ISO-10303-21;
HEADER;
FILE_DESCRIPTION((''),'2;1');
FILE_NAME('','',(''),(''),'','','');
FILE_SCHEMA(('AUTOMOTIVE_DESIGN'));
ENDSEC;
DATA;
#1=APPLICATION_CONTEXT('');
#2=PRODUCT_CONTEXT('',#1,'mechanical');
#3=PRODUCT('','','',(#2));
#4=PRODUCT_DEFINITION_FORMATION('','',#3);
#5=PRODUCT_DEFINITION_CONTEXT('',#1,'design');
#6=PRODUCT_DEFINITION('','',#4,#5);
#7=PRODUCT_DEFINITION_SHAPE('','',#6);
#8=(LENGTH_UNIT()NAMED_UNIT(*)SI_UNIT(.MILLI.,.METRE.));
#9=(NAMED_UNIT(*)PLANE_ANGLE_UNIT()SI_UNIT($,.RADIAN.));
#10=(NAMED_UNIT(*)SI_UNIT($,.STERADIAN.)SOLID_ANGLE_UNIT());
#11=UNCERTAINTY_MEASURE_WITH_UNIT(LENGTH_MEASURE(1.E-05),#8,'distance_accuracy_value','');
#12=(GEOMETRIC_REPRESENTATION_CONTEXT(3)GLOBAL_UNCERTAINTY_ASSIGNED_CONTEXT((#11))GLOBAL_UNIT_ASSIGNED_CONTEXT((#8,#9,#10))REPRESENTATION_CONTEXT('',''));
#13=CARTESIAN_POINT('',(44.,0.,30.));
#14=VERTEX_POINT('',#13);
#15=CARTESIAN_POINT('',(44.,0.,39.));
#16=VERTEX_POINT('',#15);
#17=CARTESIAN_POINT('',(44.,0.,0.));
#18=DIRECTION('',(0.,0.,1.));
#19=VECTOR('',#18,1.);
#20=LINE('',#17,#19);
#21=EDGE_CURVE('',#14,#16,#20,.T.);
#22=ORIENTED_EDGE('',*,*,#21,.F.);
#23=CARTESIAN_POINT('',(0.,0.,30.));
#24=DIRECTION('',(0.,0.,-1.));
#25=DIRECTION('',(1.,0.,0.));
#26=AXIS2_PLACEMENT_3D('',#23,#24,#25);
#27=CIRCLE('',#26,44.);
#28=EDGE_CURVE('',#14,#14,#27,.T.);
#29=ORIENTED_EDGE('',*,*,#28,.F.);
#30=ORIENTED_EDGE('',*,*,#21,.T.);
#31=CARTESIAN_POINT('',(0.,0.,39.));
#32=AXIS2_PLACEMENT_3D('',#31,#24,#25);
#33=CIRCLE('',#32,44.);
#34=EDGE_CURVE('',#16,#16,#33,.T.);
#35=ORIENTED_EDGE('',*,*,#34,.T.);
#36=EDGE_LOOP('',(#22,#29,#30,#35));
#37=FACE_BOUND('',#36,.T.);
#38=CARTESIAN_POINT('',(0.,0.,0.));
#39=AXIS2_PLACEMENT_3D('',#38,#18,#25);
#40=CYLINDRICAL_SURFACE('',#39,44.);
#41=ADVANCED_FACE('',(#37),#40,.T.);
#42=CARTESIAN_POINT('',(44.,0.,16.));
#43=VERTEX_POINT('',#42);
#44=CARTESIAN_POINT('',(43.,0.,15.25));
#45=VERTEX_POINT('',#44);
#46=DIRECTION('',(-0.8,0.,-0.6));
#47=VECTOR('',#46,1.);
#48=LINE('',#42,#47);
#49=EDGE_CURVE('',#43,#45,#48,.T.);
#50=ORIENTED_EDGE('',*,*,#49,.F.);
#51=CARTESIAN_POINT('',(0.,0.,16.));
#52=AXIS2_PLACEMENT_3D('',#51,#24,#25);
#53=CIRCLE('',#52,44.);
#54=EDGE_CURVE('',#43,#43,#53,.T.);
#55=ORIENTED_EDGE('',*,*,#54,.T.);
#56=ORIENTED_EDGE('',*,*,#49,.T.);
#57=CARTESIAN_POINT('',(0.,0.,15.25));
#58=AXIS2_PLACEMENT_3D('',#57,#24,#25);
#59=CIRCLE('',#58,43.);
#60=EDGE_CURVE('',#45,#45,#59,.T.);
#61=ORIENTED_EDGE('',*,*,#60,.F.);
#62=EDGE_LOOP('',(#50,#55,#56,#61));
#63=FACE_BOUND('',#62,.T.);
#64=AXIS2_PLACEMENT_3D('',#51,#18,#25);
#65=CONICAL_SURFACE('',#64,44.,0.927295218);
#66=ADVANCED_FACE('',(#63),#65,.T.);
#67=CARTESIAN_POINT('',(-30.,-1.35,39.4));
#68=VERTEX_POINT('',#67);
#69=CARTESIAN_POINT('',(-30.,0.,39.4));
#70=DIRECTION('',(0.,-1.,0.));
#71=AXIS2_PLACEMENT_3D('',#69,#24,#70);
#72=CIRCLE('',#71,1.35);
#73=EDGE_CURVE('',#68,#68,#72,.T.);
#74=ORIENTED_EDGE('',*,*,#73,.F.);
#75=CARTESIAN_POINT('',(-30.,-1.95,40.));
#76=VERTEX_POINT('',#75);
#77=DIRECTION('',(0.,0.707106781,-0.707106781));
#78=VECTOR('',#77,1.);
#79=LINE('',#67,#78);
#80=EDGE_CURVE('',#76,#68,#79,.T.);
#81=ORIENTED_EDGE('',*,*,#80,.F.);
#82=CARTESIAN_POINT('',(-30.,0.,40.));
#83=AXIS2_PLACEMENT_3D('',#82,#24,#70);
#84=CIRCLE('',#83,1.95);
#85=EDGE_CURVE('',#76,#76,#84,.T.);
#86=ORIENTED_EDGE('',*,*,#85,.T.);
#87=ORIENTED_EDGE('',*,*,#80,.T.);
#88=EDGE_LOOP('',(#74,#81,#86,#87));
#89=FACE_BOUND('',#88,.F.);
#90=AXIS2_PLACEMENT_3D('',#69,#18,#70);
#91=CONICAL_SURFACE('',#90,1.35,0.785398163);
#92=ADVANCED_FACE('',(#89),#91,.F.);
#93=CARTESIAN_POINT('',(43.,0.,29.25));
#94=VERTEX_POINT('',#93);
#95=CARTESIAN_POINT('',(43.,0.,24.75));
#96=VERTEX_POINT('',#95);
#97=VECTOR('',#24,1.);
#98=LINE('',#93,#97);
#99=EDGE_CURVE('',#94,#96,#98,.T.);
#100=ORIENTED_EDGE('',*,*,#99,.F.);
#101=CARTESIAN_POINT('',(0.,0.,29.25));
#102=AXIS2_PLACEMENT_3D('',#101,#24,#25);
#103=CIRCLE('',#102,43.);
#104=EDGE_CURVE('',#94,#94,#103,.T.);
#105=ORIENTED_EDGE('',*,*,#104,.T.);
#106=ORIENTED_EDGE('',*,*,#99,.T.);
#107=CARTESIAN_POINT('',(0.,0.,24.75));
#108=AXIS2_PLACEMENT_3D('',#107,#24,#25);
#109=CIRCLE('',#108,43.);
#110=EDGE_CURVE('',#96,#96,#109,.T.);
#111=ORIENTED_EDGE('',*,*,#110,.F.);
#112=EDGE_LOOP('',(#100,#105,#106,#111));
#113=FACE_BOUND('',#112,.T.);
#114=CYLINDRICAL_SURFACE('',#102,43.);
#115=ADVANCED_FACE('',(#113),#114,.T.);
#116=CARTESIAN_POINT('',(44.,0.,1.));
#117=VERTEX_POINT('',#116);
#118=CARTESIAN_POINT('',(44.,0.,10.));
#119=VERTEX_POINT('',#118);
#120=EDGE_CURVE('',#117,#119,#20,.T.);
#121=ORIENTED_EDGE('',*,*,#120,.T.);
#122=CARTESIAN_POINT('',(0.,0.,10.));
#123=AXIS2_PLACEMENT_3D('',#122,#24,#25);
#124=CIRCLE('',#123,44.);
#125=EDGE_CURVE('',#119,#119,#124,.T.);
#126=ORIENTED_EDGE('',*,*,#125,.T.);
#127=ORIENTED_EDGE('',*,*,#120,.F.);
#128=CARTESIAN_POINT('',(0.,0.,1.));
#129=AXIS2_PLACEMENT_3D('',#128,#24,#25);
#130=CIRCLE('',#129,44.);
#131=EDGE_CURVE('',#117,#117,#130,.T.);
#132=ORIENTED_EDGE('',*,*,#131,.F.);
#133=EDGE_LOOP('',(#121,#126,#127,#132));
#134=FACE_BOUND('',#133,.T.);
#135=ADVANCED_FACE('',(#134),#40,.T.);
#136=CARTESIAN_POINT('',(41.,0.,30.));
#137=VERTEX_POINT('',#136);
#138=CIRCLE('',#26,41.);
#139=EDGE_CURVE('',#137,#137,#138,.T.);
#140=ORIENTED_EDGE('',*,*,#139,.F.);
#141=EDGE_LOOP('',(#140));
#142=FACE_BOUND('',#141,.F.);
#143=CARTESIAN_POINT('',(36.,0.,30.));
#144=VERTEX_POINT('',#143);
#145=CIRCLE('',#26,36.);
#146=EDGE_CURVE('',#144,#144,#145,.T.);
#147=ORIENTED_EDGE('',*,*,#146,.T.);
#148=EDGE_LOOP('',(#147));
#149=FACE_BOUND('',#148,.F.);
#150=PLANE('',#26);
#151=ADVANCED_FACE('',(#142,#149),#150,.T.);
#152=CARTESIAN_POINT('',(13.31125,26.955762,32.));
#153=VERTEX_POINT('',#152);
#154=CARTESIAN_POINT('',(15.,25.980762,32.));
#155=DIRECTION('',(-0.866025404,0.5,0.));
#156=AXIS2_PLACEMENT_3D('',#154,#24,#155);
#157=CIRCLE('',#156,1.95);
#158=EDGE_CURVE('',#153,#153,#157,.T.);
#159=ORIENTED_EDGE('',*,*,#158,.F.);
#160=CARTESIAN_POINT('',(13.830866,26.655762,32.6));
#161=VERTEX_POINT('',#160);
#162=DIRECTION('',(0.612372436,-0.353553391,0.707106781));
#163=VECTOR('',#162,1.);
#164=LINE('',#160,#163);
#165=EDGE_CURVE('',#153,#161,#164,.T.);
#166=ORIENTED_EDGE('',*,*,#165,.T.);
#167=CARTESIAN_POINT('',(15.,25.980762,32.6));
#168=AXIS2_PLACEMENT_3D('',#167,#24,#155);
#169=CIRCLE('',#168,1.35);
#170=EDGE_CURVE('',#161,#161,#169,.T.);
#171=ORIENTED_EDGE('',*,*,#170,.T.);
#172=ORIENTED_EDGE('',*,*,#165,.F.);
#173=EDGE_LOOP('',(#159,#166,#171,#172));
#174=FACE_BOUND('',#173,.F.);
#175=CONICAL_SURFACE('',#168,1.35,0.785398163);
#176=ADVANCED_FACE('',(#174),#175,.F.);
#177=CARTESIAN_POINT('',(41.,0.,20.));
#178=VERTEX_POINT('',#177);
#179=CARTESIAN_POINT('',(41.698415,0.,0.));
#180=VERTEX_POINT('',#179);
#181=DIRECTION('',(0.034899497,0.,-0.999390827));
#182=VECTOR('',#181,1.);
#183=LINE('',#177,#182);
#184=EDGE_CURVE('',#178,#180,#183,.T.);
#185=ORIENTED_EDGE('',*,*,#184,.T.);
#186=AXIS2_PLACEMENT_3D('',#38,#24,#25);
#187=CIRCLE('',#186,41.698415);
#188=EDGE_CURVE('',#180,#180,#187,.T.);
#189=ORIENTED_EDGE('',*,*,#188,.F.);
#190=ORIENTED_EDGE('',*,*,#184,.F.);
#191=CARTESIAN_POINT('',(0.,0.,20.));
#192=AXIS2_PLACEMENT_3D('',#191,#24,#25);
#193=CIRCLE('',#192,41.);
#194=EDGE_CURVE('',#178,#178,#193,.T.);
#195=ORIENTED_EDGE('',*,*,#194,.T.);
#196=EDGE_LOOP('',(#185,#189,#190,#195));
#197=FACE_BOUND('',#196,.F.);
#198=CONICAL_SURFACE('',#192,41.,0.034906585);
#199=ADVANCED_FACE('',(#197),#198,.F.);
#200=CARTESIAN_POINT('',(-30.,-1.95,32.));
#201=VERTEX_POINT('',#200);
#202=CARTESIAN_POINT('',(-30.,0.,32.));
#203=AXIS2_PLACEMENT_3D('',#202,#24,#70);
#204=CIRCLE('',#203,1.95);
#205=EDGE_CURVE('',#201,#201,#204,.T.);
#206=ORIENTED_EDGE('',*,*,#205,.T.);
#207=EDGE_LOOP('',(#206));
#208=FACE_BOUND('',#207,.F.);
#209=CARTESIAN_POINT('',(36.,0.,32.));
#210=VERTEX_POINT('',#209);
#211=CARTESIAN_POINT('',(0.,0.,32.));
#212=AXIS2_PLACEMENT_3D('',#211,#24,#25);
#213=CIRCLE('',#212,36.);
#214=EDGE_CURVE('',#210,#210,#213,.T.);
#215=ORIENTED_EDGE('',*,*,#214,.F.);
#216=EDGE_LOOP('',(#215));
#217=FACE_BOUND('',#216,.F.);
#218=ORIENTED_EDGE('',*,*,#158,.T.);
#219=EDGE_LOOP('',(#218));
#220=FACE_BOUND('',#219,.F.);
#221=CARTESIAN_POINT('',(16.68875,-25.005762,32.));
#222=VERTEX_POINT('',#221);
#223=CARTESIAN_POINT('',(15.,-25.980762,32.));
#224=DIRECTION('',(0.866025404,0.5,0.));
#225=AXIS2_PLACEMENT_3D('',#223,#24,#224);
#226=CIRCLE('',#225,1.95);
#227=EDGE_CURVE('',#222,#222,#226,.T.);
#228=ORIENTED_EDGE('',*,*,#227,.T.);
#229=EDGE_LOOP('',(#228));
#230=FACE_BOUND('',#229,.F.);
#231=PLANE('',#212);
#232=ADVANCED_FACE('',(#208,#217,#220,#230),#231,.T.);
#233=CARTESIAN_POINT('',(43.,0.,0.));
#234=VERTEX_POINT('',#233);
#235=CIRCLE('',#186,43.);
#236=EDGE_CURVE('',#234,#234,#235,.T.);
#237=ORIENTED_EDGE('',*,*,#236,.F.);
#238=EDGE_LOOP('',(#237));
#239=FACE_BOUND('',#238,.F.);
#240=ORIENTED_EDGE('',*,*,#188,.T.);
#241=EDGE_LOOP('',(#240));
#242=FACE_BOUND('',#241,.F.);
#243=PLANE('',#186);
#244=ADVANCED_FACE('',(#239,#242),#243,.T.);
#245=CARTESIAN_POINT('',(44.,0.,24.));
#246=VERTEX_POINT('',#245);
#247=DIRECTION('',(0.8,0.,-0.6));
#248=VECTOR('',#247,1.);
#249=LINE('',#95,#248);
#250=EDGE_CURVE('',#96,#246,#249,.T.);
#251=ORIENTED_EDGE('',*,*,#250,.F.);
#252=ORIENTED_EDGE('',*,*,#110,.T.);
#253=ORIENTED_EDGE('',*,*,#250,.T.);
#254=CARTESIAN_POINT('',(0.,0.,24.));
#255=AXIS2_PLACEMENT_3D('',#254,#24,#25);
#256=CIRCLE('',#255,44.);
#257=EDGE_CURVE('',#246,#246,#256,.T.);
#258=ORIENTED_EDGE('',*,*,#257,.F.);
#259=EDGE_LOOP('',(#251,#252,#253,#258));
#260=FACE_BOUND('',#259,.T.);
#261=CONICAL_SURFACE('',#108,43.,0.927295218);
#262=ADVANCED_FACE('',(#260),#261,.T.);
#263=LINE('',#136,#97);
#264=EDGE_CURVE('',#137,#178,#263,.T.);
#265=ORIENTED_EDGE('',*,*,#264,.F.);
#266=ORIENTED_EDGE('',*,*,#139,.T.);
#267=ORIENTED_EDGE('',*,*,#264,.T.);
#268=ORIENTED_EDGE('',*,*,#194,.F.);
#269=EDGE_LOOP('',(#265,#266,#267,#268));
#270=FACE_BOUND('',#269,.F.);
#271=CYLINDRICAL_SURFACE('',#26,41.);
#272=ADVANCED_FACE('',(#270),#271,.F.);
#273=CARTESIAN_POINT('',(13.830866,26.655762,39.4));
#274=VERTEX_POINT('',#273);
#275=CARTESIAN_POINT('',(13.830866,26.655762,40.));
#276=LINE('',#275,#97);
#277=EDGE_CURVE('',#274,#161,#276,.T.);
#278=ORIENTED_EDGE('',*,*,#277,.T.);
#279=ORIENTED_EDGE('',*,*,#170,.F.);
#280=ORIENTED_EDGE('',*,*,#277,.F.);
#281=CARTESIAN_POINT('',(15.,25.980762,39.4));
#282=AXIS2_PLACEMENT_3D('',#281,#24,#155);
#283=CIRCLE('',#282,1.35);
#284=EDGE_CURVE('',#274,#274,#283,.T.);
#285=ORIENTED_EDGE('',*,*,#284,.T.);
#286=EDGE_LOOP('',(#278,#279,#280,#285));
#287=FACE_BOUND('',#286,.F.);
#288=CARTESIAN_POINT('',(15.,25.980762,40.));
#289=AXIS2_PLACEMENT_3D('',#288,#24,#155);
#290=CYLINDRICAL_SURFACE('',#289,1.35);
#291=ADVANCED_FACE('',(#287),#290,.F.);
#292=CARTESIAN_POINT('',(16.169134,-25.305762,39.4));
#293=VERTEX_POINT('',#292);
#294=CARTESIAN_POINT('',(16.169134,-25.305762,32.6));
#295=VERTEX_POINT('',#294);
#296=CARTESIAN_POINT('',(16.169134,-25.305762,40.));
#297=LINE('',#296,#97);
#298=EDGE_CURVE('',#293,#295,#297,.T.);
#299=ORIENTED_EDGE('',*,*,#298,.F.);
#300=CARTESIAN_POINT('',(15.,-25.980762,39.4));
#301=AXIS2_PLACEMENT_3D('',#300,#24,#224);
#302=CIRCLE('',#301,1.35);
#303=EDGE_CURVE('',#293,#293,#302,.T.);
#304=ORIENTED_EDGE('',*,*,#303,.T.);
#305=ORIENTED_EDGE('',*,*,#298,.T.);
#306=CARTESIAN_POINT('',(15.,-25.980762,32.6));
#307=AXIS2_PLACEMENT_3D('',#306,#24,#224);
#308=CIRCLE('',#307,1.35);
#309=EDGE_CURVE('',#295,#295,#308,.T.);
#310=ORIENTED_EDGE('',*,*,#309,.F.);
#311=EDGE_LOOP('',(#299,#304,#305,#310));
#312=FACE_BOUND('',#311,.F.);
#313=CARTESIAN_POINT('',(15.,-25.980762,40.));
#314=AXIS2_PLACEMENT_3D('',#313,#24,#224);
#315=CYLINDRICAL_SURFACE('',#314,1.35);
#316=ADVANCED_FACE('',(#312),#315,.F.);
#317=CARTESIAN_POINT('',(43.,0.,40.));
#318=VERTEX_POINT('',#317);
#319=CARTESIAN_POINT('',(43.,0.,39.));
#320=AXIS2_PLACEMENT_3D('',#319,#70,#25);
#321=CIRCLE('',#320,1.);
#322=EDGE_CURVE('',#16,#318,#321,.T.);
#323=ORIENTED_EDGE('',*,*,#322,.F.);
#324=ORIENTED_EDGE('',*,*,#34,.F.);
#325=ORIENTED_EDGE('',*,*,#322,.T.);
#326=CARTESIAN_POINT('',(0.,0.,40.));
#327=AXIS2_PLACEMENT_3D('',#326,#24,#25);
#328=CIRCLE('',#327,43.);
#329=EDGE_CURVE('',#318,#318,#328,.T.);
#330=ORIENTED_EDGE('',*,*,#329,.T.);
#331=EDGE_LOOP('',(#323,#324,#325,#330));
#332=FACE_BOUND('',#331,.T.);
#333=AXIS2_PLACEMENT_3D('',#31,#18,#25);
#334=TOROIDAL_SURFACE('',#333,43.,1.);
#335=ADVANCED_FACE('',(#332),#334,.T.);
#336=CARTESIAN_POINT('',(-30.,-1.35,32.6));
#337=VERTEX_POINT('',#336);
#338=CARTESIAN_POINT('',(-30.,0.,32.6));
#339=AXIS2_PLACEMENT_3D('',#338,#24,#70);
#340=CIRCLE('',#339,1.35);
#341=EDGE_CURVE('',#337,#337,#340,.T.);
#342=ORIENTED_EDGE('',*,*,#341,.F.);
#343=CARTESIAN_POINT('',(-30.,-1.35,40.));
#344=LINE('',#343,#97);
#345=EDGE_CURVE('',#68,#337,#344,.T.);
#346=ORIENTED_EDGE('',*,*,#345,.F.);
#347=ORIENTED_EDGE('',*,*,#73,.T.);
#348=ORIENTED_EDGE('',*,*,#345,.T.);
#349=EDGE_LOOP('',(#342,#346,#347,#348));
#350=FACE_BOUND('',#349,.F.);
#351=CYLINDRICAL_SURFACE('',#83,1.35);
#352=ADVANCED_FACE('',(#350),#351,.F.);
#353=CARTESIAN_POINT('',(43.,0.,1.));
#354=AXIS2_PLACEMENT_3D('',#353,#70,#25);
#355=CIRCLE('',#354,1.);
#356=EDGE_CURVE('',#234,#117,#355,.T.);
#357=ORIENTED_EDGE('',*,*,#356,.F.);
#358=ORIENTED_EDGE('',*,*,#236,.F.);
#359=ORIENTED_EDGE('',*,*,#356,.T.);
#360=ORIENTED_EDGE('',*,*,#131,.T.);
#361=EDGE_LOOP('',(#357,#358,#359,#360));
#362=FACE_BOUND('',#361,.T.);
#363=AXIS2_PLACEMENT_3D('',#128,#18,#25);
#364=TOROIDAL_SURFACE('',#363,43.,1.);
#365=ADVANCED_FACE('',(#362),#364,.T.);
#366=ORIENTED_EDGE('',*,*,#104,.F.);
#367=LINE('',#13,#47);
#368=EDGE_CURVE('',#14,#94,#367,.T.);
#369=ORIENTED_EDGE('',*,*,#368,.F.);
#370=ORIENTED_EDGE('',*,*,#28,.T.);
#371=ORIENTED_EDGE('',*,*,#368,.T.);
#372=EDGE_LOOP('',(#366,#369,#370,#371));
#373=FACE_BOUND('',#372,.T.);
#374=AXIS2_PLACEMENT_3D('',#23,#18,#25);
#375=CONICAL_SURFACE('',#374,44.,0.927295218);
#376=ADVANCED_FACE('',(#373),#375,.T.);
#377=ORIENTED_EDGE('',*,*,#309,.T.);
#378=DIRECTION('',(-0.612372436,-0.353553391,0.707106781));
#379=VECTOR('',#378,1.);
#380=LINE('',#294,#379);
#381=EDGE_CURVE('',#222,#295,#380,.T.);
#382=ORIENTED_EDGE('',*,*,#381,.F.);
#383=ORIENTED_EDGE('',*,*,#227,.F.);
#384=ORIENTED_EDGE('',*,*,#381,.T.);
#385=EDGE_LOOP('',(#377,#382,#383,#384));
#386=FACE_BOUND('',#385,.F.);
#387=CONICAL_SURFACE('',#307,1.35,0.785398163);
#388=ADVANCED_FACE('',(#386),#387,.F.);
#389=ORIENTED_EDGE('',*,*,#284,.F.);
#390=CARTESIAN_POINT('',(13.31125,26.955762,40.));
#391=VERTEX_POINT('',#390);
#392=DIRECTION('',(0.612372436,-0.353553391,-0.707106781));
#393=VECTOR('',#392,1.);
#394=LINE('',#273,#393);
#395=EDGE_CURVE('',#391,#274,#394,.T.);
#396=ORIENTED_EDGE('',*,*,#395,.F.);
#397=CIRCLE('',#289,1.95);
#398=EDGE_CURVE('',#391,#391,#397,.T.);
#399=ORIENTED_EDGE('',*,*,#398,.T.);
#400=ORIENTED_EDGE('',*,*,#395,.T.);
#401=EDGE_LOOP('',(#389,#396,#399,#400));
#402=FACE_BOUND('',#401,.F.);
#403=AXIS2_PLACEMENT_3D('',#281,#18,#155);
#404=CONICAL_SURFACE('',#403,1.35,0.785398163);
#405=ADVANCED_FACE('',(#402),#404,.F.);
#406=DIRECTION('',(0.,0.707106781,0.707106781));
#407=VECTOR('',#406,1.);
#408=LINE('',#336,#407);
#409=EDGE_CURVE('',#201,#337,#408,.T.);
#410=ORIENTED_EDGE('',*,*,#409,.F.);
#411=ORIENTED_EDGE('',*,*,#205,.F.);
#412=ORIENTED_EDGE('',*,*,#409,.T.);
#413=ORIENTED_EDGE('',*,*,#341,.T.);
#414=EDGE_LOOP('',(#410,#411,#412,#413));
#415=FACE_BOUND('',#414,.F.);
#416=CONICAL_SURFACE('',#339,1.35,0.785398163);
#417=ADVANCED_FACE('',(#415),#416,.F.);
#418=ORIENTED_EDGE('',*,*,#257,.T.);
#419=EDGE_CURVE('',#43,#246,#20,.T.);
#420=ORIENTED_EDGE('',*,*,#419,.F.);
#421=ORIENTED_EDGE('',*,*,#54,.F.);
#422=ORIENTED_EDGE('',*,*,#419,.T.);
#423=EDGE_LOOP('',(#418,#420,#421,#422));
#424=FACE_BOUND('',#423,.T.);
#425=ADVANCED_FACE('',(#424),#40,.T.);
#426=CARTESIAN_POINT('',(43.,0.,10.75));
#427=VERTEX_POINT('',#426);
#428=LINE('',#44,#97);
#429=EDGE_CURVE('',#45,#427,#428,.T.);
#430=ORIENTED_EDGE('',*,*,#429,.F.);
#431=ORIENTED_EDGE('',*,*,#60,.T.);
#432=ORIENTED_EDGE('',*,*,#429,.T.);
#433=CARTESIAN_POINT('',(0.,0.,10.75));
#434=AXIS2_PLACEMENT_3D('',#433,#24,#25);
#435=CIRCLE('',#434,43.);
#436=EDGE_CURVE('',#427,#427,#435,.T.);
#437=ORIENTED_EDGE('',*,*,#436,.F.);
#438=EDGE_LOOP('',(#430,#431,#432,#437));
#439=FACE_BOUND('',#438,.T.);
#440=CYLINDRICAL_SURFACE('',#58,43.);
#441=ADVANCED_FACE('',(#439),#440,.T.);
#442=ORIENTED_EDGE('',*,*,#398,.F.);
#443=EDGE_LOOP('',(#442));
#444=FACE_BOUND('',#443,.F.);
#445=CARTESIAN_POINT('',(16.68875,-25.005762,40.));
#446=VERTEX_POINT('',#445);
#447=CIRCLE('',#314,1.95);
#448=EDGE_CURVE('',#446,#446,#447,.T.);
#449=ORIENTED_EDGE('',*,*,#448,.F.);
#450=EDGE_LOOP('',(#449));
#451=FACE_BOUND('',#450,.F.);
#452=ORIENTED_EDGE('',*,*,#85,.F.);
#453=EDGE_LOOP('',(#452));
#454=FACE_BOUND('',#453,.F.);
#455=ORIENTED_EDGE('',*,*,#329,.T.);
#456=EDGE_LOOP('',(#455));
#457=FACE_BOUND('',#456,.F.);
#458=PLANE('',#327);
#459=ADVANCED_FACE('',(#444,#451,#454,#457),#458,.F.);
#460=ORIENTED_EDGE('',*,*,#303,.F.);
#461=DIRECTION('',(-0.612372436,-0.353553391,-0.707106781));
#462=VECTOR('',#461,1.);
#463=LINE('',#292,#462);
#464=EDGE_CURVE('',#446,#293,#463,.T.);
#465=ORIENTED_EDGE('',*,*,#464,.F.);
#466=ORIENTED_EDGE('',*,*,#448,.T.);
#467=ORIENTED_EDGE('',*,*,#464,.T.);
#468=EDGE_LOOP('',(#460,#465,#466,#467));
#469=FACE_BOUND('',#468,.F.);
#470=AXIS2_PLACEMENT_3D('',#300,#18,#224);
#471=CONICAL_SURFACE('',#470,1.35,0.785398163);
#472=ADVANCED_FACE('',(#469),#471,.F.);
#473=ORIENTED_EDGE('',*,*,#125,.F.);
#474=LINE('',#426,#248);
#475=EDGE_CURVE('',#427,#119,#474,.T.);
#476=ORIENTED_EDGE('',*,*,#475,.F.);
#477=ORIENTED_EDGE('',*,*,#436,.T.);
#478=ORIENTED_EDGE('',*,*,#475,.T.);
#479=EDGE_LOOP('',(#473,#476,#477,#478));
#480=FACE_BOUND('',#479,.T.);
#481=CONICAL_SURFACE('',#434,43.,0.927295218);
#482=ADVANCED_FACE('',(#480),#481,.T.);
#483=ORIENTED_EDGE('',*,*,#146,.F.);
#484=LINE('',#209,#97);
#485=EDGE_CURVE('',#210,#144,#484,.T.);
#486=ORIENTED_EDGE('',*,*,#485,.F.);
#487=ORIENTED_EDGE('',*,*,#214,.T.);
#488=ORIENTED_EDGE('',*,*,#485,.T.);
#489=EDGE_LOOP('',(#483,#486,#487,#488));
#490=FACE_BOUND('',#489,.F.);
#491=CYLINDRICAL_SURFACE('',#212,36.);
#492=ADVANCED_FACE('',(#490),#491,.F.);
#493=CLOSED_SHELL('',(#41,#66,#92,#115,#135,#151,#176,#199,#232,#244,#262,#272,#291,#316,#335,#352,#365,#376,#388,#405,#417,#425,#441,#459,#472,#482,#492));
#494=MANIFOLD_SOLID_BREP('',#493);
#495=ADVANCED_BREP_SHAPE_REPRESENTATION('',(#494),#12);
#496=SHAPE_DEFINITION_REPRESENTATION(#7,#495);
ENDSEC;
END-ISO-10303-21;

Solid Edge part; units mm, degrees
sketch "Sketch1" plane through (0, 0, 0) normal (0, -1, 0) x (1, 0, 0)
  line L0 (41, 0) -> (44, 0)
  line L1 (44, 0) -> (44, 40)
  line L2 (44, 40) -> (0, 40)
  line L3 (0, 40) -> (0, 32)
  line L4 (0, 32) -> (36, 32)
  line L5 (36, 32) -> (36, 30)
  line L6 (36, 30) -> (41, 30)
  line L7 (41, 30) -> (41, 0)
  dimension "D1" = 30
  dimension "D2" = 2
  dimension "D3" = 8
revolve "RevolvedProtrusion1" add sketch "Sketch1" angle 360 about axis through (0, 0, 54) along (0, 0, -1)
hole "cap_screw_threaded_hole" at (-30, 0, 40) direction (0, 0, -1) diameter 2.7 depth 30 tip angle 118 start chamfer 0.6 start chamfer angle 45 end chamfer 0.6 end chamfer angle 45
pattern_circular "Pattern1" count 3 over 360 about axis through (0, 0, 40) along (0, 0, 1) of "cap_screw_threaded_hole"
chamfer "roll_mounting_chamfer" distance 20 angle 2 1 edges at (-41, 0, 0) measured on face at (22.6891, -34.1498, 24.7)
fillet "safetly_rounds" radius 1 2 edges at (-44, 0, 40) (-44, 0, 0)
sketch "Sketch2" plane through (0, 0, 0) normal (0, -1, 0) x (1, 0, 0)
  line L0 (44, 10) -> (44, 16)
  line L1 (44, 16) -> (43, 15.25)
  line L2 (43, 15.25) -> (43, 10.75)
  line L3 (43, 10.75) -> (44, 10)
  line L4 (44, 24) -> (44, 30)
  line L5 (44, 30) -> (43, 29.25)
  line L6 (43, 29.25) -> (43, 24.75)
  line L7 (43, 24.75) -> (44, 24)
  dimension "D1" = 10
  dimension "D2" = 6
  dimension "D3" = 4.5
  dimension "D4" = 1
  dimension "D5" = 8
revolve "RevolvedCutout1" cut sketch "Sketch2" angle 360 about axis through (0, 0, 54) along (0, 0, -1)
properties part number "DRROLL-1" material "Polypropylene, general purpose"
